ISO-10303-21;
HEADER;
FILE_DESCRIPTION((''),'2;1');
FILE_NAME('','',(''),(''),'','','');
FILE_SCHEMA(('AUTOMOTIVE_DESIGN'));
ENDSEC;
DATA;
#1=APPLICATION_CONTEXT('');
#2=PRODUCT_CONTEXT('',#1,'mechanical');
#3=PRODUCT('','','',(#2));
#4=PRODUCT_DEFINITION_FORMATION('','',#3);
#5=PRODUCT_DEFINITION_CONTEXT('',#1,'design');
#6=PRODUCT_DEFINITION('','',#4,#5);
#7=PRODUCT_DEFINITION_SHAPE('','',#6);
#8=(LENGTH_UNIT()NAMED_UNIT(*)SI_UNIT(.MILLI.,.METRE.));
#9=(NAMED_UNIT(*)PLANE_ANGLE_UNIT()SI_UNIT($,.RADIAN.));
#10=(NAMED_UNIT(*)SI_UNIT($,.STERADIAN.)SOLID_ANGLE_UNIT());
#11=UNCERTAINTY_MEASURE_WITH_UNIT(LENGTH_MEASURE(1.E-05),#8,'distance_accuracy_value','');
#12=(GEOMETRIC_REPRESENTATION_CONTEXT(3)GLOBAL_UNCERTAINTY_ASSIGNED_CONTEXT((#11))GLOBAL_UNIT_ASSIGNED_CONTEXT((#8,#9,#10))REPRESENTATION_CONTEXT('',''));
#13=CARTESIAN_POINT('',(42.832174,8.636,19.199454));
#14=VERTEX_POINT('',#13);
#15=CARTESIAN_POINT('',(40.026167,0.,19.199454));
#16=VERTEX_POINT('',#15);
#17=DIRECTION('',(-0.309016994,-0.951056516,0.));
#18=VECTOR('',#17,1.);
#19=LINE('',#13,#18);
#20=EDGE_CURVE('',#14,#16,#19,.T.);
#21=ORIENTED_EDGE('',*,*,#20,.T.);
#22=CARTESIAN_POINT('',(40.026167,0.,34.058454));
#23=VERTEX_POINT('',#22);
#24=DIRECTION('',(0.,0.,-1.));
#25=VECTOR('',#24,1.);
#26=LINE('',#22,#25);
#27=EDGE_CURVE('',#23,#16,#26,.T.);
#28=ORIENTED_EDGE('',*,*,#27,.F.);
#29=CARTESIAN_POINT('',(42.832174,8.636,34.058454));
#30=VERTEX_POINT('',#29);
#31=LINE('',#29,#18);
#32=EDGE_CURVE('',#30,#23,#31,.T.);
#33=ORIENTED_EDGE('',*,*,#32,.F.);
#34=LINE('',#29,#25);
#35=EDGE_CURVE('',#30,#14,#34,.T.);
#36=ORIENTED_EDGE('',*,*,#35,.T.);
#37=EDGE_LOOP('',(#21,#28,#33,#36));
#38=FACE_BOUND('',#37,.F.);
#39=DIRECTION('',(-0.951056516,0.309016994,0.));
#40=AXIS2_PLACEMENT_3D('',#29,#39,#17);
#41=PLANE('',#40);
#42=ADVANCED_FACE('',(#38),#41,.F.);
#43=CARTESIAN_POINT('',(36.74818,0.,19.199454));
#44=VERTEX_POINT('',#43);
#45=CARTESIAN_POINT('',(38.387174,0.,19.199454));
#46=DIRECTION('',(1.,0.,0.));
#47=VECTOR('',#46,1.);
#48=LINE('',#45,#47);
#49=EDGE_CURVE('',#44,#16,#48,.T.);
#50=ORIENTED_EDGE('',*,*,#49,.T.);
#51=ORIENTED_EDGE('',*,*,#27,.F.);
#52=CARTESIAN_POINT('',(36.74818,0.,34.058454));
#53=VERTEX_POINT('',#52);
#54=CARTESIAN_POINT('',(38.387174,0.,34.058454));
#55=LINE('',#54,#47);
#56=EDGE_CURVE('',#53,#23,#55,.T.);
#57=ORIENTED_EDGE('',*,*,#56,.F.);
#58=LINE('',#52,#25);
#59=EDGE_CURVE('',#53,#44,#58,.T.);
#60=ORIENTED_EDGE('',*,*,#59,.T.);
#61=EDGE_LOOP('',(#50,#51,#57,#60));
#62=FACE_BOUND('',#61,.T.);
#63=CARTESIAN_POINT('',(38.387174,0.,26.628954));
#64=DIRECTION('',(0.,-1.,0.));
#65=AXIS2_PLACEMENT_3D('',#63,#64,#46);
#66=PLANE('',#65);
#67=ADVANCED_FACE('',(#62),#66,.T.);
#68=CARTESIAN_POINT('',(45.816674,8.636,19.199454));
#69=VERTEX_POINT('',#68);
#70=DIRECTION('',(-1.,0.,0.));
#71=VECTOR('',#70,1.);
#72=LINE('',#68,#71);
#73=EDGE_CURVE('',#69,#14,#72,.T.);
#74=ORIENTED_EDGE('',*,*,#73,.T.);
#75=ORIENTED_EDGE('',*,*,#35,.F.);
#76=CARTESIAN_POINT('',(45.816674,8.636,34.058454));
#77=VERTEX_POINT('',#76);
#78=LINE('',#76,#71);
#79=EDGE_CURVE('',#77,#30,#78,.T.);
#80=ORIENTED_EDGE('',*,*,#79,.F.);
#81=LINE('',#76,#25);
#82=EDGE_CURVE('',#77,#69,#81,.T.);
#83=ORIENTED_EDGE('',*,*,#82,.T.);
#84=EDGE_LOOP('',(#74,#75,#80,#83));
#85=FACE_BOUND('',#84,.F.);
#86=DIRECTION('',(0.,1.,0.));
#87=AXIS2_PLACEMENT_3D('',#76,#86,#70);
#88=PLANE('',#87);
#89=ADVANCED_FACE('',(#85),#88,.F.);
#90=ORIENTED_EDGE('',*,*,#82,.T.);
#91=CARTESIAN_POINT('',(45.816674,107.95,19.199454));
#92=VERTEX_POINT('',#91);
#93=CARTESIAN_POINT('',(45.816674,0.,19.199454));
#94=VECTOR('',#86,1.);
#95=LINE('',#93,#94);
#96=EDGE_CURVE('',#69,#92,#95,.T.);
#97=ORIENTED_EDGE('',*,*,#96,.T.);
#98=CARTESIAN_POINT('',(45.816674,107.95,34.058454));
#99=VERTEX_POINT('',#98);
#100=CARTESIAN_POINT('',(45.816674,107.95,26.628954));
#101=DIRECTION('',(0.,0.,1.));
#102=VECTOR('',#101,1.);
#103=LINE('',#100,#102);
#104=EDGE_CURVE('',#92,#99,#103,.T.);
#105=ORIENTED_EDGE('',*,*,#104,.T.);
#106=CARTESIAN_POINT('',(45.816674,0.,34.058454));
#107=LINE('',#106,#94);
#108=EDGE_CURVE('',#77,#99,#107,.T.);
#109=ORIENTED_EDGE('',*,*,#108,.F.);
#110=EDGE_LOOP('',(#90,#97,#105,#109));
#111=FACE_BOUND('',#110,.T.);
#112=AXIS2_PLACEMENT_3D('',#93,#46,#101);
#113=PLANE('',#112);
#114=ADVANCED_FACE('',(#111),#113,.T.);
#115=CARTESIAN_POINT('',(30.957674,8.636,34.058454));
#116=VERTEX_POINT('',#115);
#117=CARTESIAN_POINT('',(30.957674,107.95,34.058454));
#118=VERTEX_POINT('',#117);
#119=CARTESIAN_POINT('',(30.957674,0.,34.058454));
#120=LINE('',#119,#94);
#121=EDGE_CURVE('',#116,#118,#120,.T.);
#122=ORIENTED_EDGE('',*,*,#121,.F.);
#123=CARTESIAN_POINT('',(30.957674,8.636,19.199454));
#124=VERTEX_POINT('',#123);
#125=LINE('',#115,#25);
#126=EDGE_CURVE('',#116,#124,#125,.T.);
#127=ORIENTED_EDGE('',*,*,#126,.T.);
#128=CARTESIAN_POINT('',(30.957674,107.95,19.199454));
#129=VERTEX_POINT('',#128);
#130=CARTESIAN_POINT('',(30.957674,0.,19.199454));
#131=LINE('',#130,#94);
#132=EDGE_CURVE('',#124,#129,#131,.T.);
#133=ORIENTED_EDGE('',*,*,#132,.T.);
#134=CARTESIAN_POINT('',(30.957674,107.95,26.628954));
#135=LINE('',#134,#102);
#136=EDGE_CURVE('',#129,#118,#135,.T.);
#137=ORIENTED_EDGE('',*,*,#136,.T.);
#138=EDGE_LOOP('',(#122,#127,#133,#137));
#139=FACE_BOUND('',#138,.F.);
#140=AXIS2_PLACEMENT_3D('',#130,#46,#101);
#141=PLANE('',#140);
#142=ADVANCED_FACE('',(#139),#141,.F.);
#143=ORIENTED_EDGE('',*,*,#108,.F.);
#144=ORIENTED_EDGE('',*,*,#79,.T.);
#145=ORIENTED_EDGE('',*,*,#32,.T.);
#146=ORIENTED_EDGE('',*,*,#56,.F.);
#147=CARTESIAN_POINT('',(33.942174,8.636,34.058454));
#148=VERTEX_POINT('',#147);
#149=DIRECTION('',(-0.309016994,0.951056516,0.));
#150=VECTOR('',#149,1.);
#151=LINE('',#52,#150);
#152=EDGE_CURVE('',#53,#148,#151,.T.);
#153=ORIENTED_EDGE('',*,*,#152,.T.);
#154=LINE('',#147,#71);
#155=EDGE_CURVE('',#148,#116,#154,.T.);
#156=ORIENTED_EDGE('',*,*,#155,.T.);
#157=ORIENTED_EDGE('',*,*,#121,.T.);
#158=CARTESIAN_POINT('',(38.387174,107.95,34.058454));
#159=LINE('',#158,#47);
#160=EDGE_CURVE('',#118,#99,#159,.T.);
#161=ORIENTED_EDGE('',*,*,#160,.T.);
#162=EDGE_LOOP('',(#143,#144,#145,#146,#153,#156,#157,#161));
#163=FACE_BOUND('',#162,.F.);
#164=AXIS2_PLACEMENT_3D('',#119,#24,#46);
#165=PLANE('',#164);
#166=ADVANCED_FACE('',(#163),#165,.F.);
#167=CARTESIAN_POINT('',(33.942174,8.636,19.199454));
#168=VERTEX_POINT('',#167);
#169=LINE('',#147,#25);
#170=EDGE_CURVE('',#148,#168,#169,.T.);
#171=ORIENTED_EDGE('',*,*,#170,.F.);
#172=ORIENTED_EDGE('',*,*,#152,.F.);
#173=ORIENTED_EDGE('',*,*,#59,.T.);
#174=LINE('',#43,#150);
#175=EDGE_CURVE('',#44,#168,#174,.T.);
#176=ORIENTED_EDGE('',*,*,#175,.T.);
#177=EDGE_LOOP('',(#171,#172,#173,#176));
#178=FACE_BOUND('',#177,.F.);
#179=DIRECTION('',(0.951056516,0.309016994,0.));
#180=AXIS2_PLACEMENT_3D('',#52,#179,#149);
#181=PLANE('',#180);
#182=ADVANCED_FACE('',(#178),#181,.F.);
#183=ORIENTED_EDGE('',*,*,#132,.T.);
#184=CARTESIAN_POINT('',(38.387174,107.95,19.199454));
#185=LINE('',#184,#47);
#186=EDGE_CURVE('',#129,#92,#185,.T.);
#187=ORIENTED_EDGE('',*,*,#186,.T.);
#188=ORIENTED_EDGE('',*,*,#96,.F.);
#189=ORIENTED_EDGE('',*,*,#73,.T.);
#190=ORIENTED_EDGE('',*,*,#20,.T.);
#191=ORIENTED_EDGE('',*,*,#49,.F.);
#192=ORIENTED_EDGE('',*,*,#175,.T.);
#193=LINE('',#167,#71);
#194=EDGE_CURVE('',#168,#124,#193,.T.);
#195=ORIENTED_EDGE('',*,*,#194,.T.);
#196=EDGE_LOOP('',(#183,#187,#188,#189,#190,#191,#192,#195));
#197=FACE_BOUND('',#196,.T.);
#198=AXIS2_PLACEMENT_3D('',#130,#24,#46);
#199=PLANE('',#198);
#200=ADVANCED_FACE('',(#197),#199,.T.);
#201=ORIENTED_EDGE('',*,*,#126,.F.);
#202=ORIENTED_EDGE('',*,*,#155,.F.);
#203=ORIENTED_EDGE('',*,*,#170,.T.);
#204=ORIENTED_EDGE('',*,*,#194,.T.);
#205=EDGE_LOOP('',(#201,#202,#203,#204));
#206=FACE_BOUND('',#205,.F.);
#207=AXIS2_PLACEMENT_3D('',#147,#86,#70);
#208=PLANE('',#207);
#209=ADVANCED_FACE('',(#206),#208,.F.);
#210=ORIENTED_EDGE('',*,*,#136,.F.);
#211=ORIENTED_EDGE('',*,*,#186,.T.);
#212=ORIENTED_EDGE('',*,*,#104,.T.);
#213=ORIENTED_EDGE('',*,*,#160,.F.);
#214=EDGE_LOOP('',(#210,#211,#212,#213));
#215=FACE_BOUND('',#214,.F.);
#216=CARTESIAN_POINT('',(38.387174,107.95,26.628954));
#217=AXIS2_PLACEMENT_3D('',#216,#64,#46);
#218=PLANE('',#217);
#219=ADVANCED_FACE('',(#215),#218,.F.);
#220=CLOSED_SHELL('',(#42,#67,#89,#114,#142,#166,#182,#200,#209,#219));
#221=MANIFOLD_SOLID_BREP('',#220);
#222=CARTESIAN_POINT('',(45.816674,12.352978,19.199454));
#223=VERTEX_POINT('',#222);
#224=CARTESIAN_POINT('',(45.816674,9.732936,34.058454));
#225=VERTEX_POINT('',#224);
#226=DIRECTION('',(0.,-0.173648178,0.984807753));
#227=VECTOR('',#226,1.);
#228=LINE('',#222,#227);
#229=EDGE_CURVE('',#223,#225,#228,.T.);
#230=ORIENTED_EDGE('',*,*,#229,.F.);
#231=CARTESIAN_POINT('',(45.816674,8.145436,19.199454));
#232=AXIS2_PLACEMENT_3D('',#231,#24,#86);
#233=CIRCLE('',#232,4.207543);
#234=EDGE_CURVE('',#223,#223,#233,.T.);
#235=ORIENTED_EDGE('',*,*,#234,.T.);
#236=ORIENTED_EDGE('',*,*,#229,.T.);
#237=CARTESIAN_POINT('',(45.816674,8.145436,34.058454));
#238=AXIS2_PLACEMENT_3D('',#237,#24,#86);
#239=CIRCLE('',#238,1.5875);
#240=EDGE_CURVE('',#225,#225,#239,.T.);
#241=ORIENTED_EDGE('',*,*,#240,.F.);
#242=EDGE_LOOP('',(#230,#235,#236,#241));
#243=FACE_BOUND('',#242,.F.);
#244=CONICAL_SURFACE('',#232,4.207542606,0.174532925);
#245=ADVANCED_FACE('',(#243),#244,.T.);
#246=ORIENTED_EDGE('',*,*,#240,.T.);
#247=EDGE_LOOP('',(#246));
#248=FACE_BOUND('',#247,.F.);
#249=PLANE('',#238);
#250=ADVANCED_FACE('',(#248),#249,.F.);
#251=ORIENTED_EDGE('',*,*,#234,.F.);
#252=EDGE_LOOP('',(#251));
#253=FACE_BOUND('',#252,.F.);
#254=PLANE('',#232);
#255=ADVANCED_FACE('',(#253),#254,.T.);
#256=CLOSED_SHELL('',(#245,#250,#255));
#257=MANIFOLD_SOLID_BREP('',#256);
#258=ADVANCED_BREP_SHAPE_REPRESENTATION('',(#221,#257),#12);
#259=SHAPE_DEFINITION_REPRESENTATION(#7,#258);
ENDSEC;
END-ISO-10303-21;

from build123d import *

# Parameters (mm, degrees)
F4_W      = 14.859
F4_H      = 14.859
F5_DEPTH  = 107.95
F10_DEPTH = 14.859


# Not quite as in the source:
# - a length typed as a fraction of an inch, garbled in the dataset ("3 / 203.2 mm" for 3/8 in), is restored


with BuildPart() as f5:
    # F4 (on Front) → F5 (new body)
    with BuildSketch(Plane.XZ):
        with Locations((38.387173794, 26.6289538287)):
            Rectangle(F4_W, F4_H)
    extrude(amount=-F5_DEPTH)

    # F6 (on face) → F10 (cut, through all)
    with BuildSketch(Plane.XY.offset(34.0584538287)):
        Polygon((30.957673794, 0), (36.7481802907, 0), (33.942173794, 8.636), (30.957673794, 8.636), align=None)
        Polygon((42.832173794, 8.636), (40.0261672974, 0), (45.816673794, 0), (45.816673794, 8.636), align=None)
    extrude(amount=-F10_DEPTH, mode=Mode.SUBTRACT)


with BuildPart() as f9:
    # F8 (on face) → F9 (revolve)
    with BuildSketch(Plane.YZ.offset(45.816673794)):
        Polygon((12.3529781278, 19.1994538287), (9.7329355214, 34.0584538287), (8.1454355214, 34.0584538287), (8.1454355214, 19.1994538287), align=None)
    revolve(axis=Axis((45.816673794, 8.1454355214, 26.6289538287), (0, 0, -1)))


solid = Compound([f5.part, f9.part])
